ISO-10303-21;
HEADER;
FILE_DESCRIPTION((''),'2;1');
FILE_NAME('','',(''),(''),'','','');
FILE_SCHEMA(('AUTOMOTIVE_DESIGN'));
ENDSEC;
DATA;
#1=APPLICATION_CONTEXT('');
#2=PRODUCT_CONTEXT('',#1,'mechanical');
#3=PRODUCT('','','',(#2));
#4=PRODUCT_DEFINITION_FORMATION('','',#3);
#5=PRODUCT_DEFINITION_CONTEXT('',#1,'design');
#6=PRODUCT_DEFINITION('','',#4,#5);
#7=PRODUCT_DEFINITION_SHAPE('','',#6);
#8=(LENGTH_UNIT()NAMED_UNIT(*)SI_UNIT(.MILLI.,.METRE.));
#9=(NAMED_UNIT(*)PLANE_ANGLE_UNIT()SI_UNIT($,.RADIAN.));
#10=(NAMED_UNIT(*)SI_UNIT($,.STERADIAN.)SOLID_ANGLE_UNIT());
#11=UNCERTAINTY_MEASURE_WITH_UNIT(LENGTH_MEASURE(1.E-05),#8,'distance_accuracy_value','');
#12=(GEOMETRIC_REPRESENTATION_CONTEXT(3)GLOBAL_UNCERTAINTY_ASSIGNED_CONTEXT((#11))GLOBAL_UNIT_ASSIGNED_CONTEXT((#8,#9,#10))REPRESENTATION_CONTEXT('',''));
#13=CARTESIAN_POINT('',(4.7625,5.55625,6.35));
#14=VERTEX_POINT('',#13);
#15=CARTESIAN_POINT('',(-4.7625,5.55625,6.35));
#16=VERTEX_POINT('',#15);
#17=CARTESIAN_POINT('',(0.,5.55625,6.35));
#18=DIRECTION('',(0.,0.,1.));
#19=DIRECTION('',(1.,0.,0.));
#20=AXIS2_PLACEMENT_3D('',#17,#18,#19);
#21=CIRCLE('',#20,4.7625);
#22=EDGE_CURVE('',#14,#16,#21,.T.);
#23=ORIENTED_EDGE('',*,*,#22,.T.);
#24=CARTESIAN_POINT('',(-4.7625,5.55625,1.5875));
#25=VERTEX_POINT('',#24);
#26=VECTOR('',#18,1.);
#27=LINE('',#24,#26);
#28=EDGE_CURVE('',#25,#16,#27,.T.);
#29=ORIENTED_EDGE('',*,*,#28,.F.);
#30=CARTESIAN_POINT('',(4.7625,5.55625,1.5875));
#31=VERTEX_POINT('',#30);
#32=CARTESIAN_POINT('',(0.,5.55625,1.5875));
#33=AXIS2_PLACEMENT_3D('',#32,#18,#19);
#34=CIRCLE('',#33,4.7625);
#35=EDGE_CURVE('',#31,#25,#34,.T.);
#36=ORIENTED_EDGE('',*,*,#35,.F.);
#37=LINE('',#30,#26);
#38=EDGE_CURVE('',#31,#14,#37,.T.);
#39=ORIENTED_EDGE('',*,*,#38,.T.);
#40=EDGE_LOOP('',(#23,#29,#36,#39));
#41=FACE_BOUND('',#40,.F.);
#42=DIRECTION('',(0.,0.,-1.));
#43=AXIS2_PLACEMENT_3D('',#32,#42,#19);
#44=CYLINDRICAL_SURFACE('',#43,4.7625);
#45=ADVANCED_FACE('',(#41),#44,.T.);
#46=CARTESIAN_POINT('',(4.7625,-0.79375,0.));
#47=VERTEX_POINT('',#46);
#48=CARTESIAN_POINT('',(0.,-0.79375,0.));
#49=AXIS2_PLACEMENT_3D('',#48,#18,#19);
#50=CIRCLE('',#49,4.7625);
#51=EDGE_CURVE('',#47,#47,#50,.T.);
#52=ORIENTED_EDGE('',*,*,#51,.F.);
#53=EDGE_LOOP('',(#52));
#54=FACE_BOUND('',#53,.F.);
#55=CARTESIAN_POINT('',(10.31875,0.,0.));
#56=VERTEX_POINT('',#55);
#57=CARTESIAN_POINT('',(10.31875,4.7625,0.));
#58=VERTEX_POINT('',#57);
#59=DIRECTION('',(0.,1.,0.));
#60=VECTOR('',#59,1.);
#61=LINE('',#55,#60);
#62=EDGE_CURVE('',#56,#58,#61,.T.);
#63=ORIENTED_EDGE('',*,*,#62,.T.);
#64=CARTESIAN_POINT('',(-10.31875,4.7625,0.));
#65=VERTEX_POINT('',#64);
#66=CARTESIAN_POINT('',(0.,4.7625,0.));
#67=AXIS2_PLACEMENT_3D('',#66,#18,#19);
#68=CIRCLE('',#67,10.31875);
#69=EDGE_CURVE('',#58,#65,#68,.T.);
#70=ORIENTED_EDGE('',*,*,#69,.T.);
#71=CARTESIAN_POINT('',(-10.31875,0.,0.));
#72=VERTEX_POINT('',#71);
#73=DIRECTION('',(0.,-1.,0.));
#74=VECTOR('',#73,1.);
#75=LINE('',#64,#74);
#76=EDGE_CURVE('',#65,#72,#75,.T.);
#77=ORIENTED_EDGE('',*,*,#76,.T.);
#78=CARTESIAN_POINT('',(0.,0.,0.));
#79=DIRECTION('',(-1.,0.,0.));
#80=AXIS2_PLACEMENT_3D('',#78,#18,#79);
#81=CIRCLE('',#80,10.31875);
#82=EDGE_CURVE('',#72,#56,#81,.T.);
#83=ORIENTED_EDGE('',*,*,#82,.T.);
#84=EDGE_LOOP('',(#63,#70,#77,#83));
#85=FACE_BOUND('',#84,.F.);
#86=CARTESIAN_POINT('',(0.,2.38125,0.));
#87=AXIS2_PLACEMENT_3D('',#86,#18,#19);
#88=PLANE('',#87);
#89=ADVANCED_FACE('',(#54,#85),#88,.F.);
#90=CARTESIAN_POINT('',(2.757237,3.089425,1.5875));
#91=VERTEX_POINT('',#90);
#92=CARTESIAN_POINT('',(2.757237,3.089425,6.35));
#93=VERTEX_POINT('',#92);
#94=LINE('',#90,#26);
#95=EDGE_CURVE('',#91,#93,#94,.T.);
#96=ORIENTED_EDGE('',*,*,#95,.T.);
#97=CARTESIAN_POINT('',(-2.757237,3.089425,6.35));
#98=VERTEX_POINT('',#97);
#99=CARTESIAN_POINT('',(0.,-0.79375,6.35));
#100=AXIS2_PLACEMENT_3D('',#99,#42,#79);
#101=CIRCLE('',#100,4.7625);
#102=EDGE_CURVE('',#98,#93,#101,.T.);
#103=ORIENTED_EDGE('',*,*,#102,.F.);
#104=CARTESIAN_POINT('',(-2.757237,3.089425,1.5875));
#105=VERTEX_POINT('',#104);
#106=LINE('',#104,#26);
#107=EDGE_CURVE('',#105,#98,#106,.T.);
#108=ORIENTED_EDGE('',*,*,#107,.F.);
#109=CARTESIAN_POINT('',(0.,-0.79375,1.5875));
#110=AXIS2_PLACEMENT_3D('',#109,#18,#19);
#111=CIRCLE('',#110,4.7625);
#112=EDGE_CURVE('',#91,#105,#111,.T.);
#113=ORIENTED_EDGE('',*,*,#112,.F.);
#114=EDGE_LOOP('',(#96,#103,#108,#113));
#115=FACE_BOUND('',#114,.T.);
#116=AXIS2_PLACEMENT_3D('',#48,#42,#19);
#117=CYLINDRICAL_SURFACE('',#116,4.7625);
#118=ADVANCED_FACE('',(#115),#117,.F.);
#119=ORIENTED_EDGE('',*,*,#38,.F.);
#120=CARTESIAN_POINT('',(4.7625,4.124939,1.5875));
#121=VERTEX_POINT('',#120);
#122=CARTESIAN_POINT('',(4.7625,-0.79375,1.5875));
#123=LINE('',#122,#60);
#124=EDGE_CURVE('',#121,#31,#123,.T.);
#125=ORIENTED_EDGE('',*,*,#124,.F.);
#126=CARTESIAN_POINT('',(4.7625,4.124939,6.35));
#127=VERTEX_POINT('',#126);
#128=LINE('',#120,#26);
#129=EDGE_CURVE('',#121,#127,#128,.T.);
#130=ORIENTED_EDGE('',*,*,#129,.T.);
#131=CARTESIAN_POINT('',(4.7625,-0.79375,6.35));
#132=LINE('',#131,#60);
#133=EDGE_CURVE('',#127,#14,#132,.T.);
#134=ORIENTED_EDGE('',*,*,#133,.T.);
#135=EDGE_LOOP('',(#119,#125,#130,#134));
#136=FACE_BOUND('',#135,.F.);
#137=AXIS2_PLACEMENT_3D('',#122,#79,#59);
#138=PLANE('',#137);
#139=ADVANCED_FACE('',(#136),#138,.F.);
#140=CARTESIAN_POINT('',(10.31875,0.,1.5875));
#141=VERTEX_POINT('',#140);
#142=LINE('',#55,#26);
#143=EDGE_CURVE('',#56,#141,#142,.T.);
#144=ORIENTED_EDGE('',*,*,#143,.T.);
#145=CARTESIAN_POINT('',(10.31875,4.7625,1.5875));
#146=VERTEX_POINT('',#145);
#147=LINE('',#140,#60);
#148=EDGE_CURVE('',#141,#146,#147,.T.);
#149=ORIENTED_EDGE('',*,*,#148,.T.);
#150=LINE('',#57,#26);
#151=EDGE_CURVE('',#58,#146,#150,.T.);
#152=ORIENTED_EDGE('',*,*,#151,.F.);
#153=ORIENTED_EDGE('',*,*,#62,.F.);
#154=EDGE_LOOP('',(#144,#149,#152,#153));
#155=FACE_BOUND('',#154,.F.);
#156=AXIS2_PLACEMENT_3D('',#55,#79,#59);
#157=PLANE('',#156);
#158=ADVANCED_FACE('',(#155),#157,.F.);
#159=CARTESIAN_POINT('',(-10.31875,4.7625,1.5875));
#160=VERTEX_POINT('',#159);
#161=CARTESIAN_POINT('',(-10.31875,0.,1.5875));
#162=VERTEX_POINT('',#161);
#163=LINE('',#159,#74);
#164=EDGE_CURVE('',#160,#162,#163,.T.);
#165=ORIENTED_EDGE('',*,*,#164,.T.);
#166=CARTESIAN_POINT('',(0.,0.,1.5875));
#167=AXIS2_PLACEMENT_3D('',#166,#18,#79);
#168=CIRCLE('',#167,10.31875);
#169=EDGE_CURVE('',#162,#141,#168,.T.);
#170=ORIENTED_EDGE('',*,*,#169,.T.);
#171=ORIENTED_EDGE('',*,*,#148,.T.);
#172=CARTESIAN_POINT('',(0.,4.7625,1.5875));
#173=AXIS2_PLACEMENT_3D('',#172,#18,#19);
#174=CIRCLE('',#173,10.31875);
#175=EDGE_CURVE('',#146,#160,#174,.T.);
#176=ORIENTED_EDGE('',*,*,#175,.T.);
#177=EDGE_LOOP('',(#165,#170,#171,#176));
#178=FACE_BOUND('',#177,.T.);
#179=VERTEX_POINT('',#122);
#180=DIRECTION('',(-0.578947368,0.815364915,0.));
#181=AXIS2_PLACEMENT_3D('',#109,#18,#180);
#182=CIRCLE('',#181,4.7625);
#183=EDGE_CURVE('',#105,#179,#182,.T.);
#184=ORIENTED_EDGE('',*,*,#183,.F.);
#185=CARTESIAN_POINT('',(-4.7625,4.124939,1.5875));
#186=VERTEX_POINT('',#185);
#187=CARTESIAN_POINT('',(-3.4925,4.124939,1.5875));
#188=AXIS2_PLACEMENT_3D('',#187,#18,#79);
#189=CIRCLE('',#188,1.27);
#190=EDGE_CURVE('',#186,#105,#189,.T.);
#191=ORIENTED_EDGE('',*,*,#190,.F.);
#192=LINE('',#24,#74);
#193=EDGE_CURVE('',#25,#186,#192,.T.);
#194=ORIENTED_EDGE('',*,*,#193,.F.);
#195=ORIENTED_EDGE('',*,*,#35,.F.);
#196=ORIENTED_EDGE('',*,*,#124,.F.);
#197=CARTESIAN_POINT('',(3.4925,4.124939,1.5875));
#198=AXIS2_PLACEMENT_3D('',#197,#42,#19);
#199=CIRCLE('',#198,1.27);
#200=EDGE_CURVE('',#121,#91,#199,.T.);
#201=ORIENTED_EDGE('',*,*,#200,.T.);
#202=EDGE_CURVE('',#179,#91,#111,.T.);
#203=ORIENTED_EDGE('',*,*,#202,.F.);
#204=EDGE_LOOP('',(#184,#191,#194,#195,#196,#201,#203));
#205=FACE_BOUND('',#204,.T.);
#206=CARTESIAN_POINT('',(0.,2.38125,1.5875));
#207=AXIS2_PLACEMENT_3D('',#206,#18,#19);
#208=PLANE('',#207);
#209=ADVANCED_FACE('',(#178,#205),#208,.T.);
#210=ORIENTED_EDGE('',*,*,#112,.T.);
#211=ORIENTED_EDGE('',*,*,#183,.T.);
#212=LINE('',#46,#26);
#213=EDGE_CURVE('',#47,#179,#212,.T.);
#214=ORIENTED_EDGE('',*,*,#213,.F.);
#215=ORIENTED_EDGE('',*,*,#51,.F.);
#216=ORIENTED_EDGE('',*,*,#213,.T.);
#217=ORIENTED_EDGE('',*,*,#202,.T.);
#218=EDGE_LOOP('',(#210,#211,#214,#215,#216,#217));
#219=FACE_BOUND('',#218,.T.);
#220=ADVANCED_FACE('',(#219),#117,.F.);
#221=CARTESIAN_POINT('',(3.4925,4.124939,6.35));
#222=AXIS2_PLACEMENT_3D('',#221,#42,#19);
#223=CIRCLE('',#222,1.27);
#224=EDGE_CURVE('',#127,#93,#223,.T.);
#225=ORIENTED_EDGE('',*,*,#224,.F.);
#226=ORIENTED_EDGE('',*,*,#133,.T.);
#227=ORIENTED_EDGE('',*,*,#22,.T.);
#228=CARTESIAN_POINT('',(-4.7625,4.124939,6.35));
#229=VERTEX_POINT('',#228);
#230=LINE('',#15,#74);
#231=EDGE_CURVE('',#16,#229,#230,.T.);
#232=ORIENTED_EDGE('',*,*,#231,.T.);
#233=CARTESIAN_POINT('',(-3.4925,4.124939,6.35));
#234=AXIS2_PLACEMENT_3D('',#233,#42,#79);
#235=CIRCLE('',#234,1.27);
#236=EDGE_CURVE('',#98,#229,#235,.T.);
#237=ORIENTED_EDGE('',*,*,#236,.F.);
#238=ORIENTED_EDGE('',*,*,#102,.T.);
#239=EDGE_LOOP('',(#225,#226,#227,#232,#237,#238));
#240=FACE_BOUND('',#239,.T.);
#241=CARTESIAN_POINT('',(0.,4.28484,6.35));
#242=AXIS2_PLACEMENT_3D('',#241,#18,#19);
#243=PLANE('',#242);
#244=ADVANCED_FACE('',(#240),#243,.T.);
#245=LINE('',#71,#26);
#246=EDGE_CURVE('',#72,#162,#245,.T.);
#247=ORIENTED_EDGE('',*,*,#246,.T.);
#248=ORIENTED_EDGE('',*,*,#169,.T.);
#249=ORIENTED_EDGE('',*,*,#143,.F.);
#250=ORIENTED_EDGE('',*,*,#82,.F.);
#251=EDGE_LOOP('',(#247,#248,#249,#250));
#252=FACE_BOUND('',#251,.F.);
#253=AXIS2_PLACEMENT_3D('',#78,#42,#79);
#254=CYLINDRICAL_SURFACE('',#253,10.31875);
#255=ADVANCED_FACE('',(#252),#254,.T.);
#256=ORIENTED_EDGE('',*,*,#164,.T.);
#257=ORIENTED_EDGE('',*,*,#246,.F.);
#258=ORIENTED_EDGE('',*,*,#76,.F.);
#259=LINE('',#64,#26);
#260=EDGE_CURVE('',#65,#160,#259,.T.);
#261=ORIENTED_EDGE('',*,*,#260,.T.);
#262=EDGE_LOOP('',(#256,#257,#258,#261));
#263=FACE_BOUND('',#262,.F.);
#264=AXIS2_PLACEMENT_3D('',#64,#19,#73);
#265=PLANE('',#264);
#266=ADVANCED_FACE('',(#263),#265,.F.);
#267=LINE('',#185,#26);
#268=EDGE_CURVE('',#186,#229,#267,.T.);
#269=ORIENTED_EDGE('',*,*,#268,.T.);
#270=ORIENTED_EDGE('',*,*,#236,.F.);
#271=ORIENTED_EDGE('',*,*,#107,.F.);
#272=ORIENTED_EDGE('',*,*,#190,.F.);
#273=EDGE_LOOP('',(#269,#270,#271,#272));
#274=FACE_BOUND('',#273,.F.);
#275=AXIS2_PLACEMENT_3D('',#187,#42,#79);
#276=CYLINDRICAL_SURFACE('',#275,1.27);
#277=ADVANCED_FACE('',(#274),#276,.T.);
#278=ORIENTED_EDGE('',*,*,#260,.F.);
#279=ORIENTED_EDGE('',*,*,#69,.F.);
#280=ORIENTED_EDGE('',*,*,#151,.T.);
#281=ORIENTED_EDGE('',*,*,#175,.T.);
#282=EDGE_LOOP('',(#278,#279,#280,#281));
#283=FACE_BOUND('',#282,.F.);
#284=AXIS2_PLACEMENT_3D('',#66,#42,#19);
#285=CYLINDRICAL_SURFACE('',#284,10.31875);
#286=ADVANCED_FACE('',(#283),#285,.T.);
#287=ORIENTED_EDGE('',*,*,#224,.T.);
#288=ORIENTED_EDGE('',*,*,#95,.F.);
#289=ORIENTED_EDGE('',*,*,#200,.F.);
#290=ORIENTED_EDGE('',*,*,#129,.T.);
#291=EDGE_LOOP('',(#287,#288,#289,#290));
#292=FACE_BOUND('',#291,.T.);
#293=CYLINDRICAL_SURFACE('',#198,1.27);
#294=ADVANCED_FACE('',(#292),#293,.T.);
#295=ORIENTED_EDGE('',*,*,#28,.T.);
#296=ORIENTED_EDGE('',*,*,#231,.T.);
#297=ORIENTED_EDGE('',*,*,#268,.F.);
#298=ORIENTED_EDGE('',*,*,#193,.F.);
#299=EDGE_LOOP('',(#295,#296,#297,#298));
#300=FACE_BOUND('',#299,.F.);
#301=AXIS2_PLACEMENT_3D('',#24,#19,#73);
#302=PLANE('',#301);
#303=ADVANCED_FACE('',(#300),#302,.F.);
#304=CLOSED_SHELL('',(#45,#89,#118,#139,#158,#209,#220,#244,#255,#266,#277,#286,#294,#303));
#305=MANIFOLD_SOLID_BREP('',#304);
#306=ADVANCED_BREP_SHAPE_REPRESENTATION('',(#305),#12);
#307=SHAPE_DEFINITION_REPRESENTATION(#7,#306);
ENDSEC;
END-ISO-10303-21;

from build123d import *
from build123d import SkipClean  # not in build123d's __all__

# Parameters (mm, degrees)
F0_R        = 4.7625
F1_DEPTH    = 1.5875
F3_DEPTH    = 4.7625
F4_T1_DEPTH = 17.0592221242


# Not quite as in the source:
# - a fillet or chamfer that OpenCascade refuses, or shapes differently, is made with other operations: its cross-section is extruded or revolved along the edge and cut away or added


with BuildPart() as f1:
    # F0 (on Top) → F1 (new body)
    with BuildSketch(Plane.XY):
        with BuildLine():
            Line((-10.31875, 4.7625), (-10.31875, 0))
            ThreePointArc((-10.31875, 0), (0, -10.31875), (10.31875, 0))
            Line((10.31875, 0), (10.31875, 4.7625))
            ThreePointArc((10.31875, 4.7625), (0, 15.08125), (-10.31875, 4.7625))
        make_face()
        with Locations((0, -0.79375)):
            Circle(F0_R, mode=Mode.SUBTRACT)
    extrude(amount=F1_DEPTH)

    # F2 (on face) → F3 (join)
    with BuildSketch(Plane.XY.offset(1.5875)):
        with BuildLine():
            ThreePointArc((-4.7625, -0.79375), (0, 3.96875), (4.7625, -0.79375))
            Line((4.7625, -0.79375), (4.7625, 5.55625))
            ThreePointArc((4.7625, 5.55625), (0, 10.31875), (-4.7625, 5.55625))
            Line((-4.7625, 5.55625), (-4.7625, -0.79375))
        make_face()
    with SkipClean():  # cleaning this boolean's faces spoils the solid; the shape is the same uncleaned
        extrude(amount=F3_DEPTH)

    # F4: fillet of radius 1.27 on 2 edges, made by hand

    # F4_s2 → F4_t1 (cut)
    with BuildSketch(Plane.XY.offset(1.5875)):
        with BuildLine():
            ThreePointArc((4.7625, 4.1249388497), (4.075215964, 2.9965142376), (2.7572368421, 3.0894254076))
            ThreePointArc((2.7572368421, 3.0894254076), (4.2315922955, 1.3914348651), (4.7625, -0.79375))
            Line((4.7625, -0.79375), (4.7625, 4.1249388497))
        make_face()
        with BuildLine():
            ThreePointArc((-4.7625, 4.1249388497), (-4.075215964, 2.9965142376), (-2.7572368421, 3.0894254076))
            ThreePointArc((-2.7572368421, 3.0894254076), (-4.2315922955, 1.3914348651), (-4.7625, -0.79375))
            Line((-4.7625, -0.79375), (-4.7625, 4.1249388497))
        make_face()
    extrude(amount=F4_T1_DEPTH, mode=Mode.SUBTRACT)


solid = f1.part
